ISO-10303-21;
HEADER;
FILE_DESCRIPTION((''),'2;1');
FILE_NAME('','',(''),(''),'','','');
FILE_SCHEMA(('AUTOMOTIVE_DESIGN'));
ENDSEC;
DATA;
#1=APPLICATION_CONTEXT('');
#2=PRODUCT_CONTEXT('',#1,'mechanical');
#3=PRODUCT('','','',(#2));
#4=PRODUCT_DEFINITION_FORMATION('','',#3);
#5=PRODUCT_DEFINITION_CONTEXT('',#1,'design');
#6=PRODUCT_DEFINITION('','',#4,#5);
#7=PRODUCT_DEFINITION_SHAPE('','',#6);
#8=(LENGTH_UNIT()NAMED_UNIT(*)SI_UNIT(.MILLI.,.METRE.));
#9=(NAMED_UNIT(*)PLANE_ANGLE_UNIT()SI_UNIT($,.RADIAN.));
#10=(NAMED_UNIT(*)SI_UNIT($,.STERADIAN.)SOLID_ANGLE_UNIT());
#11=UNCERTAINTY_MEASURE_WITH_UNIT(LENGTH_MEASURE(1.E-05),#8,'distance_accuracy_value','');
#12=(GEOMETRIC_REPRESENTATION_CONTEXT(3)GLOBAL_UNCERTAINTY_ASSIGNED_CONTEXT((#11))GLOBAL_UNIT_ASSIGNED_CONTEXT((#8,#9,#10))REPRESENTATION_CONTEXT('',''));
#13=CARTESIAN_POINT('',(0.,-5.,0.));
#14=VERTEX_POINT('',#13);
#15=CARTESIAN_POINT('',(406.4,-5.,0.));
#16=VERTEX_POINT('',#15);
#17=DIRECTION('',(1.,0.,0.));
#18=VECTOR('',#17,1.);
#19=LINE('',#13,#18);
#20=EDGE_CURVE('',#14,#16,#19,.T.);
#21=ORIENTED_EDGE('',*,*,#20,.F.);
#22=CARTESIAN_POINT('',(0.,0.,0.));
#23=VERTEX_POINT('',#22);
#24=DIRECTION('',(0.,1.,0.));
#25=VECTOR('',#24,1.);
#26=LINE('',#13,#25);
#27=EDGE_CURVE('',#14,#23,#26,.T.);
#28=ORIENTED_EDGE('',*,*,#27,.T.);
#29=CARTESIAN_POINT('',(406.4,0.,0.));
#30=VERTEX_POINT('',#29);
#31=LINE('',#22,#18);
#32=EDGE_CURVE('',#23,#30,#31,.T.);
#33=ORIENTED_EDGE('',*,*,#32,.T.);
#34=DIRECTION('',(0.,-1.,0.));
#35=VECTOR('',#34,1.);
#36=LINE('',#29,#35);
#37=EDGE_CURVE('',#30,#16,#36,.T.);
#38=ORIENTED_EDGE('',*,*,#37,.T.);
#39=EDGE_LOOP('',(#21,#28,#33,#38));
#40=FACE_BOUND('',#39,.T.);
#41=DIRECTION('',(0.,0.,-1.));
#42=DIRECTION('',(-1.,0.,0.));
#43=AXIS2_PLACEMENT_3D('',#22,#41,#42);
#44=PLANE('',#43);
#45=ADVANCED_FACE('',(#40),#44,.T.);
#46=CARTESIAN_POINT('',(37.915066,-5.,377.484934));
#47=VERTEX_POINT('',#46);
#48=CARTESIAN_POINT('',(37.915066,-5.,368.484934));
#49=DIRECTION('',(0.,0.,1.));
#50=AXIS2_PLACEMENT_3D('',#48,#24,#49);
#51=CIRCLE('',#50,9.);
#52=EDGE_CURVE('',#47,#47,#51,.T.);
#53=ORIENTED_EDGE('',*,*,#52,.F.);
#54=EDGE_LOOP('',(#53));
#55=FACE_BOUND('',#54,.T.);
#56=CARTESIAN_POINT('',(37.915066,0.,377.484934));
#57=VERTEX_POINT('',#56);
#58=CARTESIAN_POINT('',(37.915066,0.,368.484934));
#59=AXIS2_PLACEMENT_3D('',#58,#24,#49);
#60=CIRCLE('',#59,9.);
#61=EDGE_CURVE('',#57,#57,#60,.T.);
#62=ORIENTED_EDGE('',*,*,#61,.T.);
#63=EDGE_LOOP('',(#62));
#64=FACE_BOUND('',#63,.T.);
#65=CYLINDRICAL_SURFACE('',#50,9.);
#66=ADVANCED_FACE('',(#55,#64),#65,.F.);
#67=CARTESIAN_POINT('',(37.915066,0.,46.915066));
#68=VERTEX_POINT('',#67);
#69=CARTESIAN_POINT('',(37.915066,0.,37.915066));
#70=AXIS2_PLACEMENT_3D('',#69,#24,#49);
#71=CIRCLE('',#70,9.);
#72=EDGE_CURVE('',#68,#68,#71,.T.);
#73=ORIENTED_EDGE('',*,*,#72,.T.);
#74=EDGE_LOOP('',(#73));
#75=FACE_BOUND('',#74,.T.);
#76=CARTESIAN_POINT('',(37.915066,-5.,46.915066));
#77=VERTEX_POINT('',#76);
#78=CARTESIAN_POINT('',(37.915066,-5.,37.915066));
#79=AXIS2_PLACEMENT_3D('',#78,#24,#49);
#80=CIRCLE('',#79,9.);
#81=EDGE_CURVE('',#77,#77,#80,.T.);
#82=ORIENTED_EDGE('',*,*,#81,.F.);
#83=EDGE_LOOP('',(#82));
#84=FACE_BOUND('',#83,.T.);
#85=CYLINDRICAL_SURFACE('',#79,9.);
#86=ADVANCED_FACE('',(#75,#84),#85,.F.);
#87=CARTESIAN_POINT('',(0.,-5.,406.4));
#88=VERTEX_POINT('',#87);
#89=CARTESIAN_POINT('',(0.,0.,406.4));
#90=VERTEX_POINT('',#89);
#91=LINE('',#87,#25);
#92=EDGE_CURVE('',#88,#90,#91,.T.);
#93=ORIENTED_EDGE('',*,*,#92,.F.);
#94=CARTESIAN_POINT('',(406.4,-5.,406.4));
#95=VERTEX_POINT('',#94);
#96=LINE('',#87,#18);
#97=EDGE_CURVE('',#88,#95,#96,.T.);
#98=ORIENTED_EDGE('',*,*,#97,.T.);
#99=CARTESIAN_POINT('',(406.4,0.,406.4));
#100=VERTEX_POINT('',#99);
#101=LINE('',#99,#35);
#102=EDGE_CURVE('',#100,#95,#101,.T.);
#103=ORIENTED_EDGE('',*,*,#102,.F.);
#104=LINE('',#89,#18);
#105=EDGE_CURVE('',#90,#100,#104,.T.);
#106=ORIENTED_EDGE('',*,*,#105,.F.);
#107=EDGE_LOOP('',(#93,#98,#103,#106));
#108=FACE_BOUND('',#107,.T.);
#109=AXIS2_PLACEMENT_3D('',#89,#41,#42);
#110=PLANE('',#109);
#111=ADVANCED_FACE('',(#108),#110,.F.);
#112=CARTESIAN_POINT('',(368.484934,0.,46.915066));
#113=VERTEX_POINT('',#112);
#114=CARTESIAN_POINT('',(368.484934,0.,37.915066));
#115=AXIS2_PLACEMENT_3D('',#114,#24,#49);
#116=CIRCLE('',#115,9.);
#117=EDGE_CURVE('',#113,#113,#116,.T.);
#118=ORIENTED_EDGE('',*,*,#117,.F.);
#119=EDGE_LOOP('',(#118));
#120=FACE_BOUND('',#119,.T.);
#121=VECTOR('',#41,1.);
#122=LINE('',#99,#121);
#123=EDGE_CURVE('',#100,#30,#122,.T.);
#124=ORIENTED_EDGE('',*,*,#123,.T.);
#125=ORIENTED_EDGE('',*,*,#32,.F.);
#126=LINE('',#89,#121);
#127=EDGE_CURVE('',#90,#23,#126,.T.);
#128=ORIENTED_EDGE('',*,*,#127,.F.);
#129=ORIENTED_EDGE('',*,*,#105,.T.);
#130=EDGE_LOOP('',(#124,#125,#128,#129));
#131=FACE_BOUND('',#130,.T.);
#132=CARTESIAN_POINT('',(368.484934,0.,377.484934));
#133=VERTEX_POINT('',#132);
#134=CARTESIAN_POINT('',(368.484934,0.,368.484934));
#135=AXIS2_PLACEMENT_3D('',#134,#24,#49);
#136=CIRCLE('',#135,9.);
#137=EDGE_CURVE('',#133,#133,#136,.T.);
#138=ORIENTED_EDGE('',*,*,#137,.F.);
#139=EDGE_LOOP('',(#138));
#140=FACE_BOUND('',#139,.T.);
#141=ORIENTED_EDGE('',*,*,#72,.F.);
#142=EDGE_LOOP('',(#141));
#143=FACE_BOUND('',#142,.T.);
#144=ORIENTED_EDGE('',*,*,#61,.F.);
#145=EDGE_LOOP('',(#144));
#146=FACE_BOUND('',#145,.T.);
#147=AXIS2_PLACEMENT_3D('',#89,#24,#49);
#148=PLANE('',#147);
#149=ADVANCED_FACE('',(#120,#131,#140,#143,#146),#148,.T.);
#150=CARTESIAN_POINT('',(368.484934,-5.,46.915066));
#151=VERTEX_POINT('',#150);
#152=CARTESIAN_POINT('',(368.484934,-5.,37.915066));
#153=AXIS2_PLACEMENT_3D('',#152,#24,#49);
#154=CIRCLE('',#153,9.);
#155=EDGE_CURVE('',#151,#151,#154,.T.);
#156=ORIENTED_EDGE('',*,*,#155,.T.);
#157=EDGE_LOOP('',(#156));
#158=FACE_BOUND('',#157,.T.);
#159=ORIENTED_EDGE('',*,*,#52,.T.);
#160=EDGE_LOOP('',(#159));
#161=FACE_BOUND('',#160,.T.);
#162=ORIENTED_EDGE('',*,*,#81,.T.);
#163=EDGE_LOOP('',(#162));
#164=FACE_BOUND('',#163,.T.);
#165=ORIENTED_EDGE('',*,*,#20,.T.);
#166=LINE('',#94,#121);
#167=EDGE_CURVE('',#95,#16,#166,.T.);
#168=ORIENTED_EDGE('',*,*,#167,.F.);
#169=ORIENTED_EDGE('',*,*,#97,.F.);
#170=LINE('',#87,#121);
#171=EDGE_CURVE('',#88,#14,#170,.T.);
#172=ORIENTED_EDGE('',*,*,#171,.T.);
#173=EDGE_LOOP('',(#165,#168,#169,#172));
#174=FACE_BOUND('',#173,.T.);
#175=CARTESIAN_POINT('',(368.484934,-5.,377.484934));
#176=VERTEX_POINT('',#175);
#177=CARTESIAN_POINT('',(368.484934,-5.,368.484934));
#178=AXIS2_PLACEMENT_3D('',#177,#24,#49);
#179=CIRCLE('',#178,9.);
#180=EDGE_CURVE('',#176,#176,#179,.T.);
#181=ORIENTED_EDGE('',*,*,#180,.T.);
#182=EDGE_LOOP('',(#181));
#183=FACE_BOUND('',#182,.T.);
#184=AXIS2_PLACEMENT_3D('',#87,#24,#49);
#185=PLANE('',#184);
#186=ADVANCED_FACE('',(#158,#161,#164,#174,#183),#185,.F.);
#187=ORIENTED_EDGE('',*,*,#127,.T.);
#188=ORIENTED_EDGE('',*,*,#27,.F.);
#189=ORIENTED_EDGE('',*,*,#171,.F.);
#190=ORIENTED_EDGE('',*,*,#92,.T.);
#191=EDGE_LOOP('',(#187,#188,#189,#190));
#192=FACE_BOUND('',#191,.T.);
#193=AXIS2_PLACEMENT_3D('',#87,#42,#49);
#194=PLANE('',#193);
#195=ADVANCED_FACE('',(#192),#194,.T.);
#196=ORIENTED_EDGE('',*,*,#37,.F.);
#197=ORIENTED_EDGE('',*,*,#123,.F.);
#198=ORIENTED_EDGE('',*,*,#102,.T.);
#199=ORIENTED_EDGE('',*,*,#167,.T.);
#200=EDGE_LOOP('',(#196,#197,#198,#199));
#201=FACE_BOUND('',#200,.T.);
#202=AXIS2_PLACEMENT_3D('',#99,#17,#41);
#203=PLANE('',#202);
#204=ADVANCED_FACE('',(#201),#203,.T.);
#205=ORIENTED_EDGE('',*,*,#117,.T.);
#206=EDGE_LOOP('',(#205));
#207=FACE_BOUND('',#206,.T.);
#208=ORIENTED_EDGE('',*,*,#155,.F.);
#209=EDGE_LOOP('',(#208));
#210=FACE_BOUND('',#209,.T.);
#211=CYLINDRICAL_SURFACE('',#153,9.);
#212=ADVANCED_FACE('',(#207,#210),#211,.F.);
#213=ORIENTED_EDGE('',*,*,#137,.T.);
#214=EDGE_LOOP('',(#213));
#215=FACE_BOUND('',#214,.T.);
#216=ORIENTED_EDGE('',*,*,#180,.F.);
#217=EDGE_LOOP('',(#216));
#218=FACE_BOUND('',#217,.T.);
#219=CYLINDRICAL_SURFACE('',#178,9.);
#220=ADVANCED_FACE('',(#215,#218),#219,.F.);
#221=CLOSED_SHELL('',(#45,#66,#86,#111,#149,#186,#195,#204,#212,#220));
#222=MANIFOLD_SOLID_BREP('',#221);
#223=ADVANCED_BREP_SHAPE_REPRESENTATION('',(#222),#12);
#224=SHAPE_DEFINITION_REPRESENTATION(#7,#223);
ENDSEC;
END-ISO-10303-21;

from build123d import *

# Parameters (mm, degrees)
SKETCH1_W          = 406.4
SKETCH1_H          = 5
BASE_FLANGE1_DEPTH = 406.4
CUT_EXTRUDE1_DEPTH = 575.758140438


# Sheet-metal steps are written as plain solids
with BuildPart() as part:
    # Sketch1 → Base-Flange1 (new body)
    with BuildSketch(Plane.XY):
        with Locations((203.2, -2.5)):
            Rectangle(SKETCH1_W, SKETCH1_H)
    extrude(amount=BASE_FLANGE1_DEPTH)

    # Sketch6 → Cut-Extrude1 (cut, through all)
    with BuildSketch(Plane(origin=(0, 0, 0), x_dir=(1, 0, 0), z_dir=(0, 1, 0))):
        with BuildLine():
            ThreePointArc((46.915065607, -37.915065607), (41.359216499, -29.600149815), (31.551104577, -31.551104577))
            Line((31.551104577, -31.551104577), (37.915065607, -37.915065607))
            Line((37.915065607, -37.915065607), (44.279026638, -44.279026638))
            ThreePointArc((44.279026638, -44.279026638), (46.2299814, -41.359216499), (46.915065607, -37.915065607))
        make_face()
        with BuildLine():
            Line((37.915065607, -37.915065607), (31.551104577, -31.551104577))
            ThreePointArc((31.551104577, -31.551104577), (31.551104577, -44.279026638), (44.279026638, -44.279026638))
            Line((44.279026638, -44.279026638), (37.915065607, -37.915065607))
        make_face()
        with BuildLine():
            ThreePointArc((377.484934393, -37.915065607), (376.799850185, -34.470914716), (374.848895423, -31.551104577))
            Line((374.848895423, -31.551104577), (368.484934393, -37.915065607))
            Line((368.484934393, -37.915065607), (362.120973362, -44.279026638))
            ThreePointArc((362.120973362, -44.279026638), (371.929085284, -46.2299814), (377.484934393, -37.915065607))
        make_face()
        with BuildLine():
            Line((368.484934393, -37.915065607), (374.848895423, -31.551104577))
            ThreePointArc((374.848895423, -31.551104577), (362.120973362, -31.551104577), (362.120973362, -44.279026638))
            Line((362.120973362, -44.279026638), (368.484934393, -37.915065607))
        make_face()
        with BuildLine():
            ThreePointArc((362.120973362, -362.120973362), (362.120973362, -374.848895423), (374.848895423, -374.848895423))
            Line((374.848895423, -374.848895423), (368.484934393, -368.484934393))
            Line((368.484934393, -368.484934393), (362.120973362, -362.120973362))
        make_face()
        with BuildLine():
            Line((368.484934393, -368.484934393), (374.848895423, -374.848895423))
            ThreePointArc((374.848895423, -374.848895423), (376.799850185, -371.929085284), (377.484934393, -368.484934393))
            ThreePointArc((377.484934393, -368.484934393), (371.929085284, -360.1700186), (362.120973362, -362.120973362))
            Line((362.120973362, -362.120973362), (368.484934393, -368.484934393))
        make_face()
        with BuildLine():
            ThreePointArc((44.279026638, -362.120973362), (31.551104577, -362.120973362), (31.551104577, -374.848895423))
            Line((31.551104577, -374.848895423), (37.915065607, -368.484934393))
            Line((37.915065607, -368.484934393), (44.279026638, -362.120973362))
        make_face()
        with BuildLine():
            Line((37.915065607, -368.484934393), (31.551104577, -374.848895423))
            ThreePointArc((31.551104577, -374.848895423), (41.359216499, -376.799850185), (46.915065607, -368.484934393))
            ThreePointArc((46.915065607, -368.484934393), (46.2299814, -365.040783501), (44.279026638, -362.120973362))
            Line((44.279026638, -362.120973362), (37.915065607, -368.484934393))
        make_face()
    extrude(amount=-CUT_EXTRUDE1_DEPTH, mode=Mode.SUBTRACT)


solid = part.part
